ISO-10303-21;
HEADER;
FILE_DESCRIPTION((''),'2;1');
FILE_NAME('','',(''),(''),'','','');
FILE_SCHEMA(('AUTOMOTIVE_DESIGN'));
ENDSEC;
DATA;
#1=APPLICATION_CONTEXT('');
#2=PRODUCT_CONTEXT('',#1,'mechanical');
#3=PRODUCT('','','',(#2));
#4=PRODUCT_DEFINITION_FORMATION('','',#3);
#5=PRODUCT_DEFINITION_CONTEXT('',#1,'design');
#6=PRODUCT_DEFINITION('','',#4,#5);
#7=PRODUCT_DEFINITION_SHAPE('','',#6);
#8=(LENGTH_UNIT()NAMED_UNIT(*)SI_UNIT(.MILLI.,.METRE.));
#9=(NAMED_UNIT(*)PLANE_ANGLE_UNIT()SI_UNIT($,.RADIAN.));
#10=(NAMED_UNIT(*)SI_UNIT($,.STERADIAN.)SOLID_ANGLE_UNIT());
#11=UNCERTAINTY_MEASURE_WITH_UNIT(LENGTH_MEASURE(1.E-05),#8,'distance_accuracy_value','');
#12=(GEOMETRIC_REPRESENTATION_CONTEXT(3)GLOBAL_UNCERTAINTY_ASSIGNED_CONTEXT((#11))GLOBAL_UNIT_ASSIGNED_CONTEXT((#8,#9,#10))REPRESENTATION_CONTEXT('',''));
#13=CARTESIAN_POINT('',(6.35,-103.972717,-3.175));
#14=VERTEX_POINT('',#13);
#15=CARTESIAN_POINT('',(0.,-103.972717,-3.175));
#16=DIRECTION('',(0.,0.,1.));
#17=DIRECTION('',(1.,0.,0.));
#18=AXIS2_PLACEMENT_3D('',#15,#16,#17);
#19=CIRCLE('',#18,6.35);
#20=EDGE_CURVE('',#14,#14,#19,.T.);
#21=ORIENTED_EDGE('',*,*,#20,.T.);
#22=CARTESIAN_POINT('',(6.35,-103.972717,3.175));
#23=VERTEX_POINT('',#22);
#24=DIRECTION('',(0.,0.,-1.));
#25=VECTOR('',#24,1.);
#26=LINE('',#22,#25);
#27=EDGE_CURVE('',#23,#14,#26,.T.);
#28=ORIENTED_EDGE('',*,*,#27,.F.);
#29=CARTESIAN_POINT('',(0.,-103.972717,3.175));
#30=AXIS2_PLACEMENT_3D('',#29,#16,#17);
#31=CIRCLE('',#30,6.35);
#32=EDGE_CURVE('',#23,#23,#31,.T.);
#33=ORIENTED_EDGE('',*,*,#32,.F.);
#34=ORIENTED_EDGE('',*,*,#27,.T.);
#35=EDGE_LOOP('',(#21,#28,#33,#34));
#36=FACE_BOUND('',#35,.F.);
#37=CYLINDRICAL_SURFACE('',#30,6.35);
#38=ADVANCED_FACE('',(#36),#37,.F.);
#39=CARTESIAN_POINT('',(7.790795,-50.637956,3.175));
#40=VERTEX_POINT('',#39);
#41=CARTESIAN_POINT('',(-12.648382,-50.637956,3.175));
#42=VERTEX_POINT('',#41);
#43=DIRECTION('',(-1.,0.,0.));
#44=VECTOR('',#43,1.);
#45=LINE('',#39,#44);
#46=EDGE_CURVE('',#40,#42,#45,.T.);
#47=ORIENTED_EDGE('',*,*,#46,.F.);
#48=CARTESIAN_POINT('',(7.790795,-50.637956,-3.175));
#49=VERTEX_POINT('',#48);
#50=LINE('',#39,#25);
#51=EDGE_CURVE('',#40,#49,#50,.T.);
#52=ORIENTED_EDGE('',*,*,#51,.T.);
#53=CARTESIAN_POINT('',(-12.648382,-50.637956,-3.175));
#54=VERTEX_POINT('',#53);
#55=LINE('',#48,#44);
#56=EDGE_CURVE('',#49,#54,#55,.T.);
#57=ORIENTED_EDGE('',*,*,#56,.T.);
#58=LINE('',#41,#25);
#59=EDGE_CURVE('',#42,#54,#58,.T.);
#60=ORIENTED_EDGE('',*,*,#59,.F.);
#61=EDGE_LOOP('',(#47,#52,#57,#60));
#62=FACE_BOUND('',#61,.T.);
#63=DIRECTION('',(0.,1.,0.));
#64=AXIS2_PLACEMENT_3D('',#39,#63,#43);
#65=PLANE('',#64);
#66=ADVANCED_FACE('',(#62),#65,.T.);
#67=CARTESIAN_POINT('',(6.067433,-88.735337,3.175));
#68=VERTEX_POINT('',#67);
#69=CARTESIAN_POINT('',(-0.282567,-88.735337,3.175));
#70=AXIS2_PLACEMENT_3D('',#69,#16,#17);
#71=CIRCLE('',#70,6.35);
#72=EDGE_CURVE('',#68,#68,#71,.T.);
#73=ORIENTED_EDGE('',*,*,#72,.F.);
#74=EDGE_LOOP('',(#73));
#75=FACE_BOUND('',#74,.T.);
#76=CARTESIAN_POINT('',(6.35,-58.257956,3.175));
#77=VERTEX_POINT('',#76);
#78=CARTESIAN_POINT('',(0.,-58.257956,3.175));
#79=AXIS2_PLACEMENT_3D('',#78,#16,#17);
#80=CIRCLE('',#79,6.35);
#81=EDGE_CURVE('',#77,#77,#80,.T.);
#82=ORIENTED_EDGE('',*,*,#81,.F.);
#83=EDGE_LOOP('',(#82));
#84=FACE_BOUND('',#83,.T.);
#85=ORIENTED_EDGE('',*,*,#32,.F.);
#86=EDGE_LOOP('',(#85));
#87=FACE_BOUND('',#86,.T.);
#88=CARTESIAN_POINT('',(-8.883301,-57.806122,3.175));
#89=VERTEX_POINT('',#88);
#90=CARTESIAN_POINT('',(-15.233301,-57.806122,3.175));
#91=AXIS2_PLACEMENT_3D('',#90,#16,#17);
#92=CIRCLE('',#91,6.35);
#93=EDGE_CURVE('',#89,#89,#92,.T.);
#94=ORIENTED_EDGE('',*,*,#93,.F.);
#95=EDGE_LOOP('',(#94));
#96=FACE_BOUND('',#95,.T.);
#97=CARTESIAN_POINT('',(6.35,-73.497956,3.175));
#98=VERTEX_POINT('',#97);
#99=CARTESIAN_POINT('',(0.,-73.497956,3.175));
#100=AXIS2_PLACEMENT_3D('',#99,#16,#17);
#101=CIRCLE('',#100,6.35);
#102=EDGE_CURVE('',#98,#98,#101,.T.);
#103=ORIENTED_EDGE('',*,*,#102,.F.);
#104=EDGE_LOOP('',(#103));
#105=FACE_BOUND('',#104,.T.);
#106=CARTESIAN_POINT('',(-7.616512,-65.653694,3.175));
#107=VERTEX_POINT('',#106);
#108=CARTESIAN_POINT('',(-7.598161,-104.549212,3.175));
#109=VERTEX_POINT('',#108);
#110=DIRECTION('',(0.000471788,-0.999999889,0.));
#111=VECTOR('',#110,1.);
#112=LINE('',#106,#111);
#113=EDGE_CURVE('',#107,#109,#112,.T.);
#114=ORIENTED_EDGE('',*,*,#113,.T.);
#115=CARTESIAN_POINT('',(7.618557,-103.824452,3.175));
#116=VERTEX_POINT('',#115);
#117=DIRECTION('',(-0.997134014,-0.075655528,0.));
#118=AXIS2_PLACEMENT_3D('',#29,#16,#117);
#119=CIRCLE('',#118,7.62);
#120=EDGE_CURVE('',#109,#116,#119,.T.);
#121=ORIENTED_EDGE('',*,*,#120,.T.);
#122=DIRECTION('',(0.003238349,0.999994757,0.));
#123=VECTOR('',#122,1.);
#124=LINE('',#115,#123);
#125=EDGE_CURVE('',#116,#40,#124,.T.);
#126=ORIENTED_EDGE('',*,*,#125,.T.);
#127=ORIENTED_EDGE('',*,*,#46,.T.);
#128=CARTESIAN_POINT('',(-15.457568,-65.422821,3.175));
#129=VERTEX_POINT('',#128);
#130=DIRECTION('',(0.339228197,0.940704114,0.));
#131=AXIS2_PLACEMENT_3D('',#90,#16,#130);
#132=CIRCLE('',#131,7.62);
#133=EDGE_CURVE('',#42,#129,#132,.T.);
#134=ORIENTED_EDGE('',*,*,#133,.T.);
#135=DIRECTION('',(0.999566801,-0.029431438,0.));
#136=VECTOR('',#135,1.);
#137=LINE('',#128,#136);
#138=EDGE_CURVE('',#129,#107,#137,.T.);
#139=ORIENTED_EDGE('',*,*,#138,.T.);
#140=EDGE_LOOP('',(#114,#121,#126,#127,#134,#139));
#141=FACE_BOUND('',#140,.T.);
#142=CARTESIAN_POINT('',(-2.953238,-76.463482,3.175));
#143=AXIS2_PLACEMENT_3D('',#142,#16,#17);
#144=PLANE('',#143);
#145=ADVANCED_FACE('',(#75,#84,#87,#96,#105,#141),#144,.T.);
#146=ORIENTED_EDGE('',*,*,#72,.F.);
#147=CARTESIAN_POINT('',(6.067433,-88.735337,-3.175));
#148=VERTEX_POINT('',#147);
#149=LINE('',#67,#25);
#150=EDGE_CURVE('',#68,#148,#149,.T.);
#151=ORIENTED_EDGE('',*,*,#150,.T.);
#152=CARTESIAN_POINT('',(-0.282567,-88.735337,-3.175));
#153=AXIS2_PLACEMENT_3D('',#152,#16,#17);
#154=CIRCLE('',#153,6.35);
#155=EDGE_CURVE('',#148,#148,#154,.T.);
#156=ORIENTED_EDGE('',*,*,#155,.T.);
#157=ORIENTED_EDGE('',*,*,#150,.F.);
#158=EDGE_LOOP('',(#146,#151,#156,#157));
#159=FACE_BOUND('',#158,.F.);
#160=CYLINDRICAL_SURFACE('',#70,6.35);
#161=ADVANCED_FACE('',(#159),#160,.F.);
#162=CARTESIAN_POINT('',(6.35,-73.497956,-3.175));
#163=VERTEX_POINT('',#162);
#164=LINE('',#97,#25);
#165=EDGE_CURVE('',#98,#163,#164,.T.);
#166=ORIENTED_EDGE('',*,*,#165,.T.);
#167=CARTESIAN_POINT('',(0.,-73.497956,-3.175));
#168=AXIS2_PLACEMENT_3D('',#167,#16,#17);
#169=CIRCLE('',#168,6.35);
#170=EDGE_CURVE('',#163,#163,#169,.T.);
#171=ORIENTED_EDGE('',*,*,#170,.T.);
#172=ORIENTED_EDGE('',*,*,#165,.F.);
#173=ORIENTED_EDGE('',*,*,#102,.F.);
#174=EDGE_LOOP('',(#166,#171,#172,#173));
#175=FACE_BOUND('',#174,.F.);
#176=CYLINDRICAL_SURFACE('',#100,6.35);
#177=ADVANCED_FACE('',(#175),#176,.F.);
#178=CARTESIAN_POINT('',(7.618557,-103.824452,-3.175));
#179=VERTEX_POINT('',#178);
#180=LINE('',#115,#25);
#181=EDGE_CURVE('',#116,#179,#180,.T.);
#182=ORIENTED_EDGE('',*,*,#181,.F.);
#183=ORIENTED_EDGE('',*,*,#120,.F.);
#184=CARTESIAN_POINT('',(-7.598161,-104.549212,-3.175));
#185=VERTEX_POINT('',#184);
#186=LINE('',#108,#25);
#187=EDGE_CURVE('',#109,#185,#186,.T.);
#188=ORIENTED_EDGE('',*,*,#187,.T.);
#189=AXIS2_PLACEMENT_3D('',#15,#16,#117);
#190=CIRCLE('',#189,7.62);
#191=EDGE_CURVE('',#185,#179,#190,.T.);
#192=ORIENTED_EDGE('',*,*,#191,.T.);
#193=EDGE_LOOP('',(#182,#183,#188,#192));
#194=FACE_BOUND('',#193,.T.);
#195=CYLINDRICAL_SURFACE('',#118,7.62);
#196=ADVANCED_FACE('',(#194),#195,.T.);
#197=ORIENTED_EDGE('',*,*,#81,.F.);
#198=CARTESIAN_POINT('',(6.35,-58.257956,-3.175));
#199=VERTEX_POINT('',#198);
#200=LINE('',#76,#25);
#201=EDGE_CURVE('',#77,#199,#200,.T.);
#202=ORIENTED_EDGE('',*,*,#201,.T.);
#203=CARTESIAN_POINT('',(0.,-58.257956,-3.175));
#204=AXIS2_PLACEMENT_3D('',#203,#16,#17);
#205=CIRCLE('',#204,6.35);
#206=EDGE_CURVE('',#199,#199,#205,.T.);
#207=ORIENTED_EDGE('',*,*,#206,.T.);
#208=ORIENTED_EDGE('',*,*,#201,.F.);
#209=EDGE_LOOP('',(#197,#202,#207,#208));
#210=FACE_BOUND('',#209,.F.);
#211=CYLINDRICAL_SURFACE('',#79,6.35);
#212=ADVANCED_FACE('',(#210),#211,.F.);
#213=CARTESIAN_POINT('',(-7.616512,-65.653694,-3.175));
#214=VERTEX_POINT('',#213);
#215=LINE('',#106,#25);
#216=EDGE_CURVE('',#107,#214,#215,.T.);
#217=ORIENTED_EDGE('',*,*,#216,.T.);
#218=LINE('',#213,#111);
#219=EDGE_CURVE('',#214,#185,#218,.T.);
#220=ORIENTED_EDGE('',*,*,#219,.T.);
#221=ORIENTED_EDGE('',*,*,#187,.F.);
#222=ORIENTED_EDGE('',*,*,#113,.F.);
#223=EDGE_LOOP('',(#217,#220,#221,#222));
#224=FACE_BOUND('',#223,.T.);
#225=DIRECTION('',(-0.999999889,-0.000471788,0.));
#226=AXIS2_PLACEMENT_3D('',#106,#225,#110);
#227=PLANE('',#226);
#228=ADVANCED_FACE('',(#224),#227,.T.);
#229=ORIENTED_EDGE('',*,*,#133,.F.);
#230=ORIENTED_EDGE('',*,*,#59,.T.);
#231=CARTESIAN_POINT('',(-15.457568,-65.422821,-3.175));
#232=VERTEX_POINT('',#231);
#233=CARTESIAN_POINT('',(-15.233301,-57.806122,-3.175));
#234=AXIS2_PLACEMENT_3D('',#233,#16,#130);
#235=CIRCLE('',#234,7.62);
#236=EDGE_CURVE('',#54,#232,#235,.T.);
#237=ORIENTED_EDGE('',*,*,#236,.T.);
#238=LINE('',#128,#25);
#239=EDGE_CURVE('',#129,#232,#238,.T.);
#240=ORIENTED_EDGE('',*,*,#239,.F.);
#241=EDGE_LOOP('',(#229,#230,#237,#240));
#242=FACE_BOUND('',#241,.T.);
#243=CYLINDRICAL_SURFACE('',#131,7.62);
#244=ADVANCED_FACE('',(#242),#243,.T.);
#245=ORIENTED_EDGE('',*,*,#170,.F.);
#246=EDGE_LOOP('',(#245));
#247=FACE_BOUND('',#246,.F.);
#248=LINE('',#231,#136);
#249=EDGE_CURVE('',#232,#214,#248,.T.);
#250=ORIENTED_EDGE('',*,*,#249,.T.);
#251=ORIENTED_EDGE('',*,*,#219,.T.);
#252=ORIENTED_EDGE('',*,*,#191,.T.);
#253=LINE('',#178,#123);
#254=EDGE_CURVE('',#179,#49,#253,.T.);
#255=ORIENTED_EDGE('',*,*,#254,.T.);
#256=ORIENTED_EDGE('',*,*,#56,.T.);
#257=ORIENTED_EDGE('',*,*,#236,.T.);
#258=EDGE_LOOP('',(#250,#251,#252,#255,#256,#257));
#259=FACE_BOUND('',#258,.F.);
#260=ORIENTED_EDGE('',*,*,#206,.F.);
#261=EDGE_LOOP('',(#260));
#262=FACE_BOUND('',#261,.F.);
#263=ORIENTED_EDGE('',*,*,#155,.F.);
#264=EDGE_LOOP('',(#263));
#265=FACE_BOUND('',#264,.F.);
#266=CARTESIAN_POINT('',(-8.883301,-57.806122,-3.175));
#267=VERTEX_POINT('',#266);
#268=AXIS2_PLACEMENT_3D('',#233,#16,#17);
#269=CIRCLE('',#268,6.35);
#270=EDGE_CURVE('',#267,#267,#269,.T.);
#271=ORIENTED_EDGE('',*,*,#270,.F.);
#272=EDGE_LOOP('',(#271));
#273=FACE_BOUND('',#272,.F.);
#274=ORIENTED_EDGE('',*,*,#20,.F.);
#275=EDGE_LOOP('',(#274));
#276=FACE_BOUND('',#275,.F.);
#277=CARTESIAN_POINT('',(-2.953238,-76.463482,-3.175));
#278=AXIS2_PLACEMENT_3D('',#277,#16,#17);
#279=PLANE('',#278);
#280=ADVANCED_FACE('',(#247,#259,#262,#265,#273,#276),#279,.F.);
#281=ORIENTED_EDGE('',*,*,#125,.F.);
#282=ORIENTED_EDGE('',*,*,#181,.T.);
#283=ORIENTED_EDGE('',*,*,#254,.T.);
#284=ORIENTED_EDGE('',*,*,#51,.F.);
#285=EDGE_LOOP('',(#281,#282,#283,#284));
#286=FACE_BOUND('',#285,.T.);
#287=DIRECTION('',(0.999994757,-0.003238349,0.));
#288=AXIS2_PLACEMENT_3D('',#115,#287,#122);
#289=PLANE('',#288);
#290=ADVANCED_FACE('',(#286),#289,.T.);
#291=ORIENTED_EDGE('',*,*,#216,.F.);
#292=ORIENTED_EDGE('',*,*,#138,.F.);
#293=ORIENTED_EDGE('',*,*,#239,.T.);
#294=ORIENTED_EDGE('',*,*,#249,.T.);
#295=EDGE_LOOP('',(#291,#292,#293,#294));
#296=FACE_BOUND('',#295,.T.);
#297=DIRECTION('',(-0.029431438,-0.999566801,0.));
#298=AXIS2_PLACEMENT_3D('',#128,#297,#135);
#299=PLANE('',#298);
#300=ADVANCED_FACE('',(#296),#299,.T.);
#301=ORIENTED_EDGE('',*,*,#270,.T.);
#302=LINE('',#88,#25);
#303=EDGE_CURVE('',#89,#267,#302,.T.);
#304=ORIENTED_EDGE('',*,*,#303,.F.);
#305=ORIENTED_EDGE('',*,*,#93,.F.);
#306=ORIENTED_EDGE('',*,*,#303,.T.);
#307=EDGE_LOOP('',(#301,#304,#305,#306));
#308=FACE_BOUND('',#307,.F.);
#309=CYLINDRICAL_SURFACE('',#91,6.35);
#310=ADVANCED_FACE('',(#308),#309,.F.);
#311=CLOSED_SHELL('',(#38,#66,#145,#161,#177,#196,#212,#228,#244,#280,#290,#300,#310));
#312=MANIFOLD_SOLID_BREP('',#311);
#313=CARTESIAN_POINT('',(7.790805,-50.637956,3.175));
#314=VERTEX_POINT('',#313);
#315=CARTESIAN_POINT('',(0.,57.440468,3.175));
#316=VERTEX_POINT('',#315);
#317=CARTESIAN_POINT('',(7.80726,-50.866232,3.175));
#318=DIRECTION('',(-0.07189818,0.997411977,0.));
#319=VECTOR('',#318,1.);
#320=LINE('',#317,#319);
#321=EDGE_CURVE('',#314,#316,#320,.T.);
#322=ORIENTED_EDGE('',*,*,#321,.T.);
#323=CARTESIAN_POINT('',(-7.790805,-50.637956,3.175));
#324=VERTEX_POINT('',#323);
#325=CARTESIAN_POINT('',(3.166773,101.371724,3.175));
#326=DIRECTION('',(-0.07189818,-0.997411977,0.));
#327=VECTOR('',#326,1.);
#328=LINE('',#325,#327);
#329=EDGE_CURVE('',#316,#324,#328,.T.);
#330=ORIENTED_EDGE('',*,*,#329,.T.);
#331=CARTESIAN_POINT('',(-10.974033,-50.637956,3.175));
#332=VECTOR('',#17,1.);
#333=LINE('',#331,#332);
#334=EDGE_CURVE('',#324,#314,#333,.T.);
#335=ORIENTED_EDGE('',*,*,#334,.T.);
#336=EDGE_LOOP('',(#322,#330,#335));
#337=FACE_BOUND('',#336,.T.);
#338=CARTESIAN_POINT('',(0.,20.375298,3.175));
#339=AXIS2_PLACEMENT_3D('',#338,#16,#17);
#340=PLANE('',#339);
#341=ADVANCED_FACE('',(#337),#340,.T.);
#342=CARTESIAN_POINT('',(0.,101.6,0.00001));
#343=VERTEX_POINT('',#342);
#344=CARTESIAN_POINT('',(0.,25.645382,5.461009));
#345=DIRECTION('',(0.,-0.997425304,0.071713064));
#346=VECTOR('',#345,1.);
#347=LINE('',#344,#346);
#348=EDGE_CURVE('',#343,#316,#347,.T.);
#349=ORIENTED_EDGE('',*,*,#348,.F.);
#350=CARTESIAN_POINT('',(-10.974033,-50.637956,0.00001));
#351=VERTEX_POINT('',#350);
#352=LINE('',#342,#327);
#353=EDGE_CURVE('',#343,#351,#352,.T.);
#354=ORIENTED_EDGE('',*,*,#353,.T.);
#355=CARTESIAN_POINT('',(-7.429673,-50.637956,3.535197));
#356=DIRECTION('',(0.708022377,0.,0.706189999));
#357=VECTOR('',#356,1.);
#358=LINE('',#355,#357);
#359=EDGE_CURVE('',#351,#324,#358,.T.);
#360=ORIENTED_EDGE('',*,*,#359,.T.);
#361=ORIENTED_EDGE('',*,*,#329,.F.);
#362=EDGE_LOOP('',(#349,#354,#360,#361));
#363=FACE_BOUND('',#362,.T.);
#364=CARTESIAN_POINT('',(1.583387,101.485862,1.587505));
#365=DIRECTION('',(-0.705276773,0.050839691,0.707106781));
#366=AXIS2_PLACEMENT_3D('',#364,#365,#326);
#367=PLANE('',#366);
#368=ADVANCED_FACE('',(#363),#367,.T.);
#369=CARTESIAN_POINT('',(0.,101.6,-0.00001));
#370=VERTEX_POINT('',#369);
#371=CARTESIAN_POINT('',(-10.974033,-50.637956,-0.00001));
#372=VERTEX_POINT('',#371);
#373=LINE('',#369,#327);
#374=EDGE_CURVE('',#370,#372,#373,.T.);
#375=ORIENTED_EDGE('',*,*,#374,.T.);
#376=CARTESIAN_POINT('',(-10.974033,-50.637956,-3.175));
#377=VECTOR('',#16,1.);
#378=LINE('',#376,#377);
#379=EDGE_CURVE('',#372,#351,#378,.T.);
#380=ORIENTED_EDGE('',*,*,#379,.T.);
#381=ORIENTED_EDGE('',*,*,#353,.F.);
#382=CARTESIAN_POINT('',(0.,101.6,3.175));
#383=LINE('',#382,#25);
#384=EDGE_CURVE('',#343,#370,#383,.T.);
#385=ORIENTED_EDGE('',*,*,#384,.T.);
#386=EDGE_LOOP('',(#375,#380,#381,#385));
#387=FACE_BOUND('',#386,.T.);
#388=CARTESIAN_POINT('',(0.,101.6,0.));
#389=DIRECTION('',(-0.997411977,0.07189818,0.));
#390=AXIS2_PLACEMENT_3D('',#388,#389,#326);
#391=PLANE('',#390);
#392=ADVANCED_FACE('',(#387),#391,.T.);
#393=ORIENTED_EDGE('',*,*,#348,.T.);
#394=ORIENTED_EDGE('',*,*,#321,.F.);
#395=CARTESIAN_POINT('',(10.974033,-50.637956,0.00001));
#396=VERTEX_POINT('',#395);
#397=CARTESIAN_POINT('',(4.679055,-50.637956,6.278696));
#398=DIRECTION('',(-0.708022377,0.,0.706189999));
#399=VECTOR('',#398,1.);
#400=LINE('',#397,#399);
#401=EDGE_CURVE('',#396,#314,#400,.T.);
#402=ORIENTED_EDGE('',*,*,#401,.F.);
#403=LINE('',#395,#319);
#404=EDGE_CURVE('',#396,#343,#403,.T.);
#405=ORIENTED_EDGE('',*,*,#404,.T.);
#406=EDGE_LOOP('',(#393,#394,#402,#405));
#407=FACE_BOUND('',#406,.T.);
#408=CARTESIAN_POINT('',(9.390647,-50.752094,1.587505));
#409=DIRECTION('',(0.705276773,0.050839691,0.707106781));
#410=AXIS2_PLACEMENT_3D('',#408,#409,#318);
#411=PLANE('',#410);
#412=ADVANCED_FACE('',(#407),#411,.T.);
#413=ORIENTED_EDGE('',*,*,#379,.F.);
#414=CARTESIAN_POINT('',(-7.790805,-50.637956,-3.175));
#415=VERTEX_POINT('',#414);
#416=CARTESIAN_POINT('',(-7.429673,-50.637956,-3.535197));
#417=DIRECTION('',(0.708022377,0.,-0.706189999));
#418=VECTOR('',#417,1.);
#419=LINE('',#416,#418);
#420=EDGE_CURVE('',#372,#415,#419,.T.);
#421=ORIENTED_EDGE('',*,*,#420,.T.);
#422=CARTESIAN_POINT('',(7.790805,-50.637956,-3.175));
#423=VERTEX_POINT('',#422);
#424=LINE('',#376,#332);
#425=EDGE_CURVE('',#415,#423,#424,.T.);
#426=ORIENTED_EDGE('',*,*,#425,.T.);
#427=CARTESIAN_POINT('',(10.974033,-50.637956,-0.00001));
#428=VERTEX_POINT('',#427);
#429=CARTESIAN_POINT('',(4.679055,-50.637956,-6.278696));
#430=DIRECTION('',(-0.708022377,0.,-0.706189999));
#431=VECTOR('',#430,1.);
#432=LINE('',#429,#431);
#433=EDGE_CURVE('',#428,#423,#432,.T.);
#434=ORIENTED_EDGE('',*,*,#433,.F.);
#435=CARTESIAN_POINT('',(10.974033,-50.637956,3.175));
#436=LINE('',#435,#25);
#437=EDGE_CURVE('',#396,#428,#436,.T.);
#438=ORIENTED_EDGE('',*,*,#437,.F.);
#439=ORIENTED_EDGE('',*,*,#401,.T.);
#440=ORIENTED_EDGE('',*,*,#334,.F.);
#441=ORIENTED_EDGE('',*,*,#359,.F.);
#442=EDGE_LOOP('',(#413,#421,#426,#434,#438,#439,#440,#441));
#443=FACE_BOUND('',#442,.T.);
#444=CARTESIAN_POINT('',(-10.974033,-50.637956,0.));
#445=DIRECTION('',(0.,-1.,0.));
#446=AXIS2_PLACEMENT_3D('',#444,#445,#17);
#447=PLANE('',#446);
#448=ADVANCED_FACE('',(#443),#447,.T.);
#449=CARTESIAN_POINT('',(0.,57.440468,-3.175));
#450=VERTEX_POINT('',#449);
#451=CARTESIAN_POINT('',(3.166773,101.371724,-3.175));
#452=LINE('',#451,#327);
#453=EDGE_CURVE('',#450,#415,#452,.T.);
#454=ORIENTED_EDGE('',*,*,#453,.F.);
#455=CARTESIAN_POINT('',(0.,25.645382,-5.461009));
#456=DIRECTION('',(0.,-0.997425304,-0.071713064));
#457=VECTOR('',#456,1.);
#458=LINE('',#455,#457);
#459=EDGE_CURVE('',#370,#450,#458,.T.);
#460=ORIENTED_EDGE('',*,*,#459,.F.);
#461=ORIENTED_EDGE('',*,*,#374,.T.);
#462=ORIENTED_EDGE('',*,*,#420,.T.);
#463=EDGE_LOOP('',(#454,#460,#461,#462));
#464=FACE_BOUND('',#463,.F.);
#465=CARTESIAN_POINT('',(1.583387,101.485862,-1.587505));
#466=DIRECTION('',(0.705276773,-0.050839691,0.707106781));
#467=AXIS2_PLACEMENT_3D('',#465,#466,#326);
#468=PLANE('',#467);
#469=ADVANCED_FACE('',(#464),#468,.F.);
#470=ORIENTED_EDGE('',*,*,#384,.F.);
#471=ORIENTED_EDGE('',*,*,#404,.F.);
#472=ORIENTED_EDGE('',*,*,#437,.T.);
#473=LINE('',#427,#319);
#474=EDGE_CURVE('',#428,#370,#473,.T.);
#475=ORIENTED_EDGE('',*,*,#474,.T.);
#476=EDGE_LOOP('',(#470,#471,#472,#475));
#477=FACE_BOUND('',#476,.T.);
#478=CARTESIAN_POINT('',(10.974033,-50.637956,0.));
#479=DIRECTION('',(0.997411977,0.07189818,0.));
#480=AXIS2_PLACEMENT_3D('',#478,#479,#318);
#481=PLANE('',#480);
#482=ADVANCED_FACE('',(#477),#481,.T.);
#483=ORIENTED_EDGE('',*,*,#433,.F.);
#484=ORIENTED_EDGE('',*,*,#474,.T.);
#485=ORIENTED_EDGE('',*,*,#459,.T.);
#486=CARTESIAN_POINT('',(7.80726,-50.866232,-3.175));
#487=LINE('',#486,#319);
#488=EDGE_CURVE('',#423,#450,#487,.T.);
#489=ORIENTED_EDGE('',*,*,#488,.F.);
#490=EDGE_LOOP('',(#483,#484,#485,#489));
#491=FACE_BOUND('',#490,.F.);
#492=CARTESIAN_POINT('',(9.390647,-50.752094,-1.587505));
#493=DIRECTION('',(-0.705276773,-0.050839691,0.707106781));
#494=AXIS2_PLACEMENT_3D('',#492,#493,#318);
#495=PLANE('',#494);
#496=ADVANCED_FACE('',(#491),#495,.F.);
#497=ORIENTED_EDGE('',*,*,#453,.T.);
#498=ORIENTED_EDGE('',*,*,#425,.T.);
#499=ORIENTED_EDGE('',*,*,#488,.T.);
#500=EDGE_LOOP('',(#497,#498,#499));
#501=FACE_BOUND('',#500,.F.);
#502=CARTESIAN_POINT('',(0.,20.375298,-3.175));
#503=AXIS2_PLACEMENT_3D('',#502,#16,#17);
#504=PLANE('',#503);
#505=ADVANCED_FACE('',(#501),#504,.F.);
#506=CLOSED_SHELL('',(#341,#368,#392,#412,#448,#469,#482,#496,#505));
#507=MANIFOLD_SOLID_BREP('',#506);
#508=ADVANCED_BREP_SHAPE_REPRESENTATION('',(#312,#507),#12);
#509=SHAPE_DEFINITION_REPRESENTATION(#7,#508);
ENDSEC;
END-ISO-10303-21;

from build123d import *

# Parameters (mm, degrees)
F1_DEPTH = 3.175
F2_SIZE  = 3.17499
F3_R     = 6.35
F4_DEPTH = 6.35


# Not quite as in the source:
# - a fillet or chamfer is up to 0.001 mm smaller than in the source, because OpenCascade refuses the exact size
# - ends of sketch curves that miss each other by under 0.0002 mm in the source are joined
# - a feature names something its author has since deleted; it is built from what else it names


with BuildPart() as f1:
    # F0 (on Top) → F1 (new body, symmetric)
    with BuildSketch(Plane.XY):
        Polygon((0, 101.6), (-10.9740330666, -50.6379564073), (10.9740330666, -50.6379564073), align=None)
    extrude(amount=F1_DEPTH, both=True)

    # F2 (size 3.175 in the source; OpenCascade refuses exactly that, so slightly less here)
    f2_edges = [f1.edges().sort_by_distance(p)[0] for p in [
        (5.487017, 25.481022, 3.175),
        (-5.487017, 25.481022, 3.175),
        (5.487017, 25.481022, -3.175),
        (-5.487017, 25.481022, -3.175),
    ]]
    chamfer(f2_edges, length=F2_SIZE)


with BuildPart() as f4:
    # F3 (on face) → F4 (new body)
    with BuildSketch(Plane.XY.offset(3.175)):
        with BuildLine():
            Line((-7.6165116267, -65.6536943669), (-7.5981611835, -104.5492119633))
            ThreePointArc((-7.5981611835, -104.5492119633), (0.3625233188, -111.5840883864), (7.6185574498, -103.8244522658))
            Line((7.6185574498, -103.8244522658), (7.7907947724, -50.6379564073))
            Line((7.7907947724, -50.6379564073), (0, -50.6379564073))
            Line((0, -50.6379564073), (-7.7908047984, -50.6379564073))
            Line((-7.7908047984, -50.6379564073), (-12.6483816852, -50.6379564073))
            ThreePointArc((-12.6483816852, -50.6379564073), (-22.7193690915, -56.3837372477), (-15.4575681017, -65.4228207847))
            Line((-15.4575681017, -65.4228207847), (-7.6165116267, -65.6536943669))
        make_face()
        with Locations((-15.2333005435, -57.806121758)):
            Circle(F3_R, mode=Mode.SUBTRACT)
        with BuildLine():
            ThreePointArc((-7.6200625985, -58.1270703408), (-7.6182081929, -58.0795600348), (-7.6166502718, -58.0320390827))
            ThreePointArc((-7.6166502718, -58.0320390827), (-7.6191889591, -58.1467826471), (-7.619999152, -58.2615514324))
            Line((-7.619999152, -58.2615514324), (-7.6200625985, -58.1270703408))
        make_face(mode=Mode.SUBTRACT)
        with Locations((0, -103.9727168383)):
            Circle(F3_R, mode=Mode.SUBTRACT)
        with Locations((-0.2825671034, -88.7353366228)):
            Circle(F3_R, mode=Mode.SUBTRACT)
        with Locations((0, -73.4979564073)):
            Circle(F3_R, mode=Mode.SUBTRACT)
        with Locations((0, -58.2579564073)):
            Circle(F3_R, mode=Mode.SUBTRACT)
        with BuildLine():
            ThreePointArc((-7.619999152, -58.2615514324), (-7.6191889591, -58.1467826471), (-7.6166502718, -58.0320390827))
            ThreePointArc((-7.6166502718, -58.0320390827), (-7.6182081929, -58.0795600348), (-7.6200625985, -58.1270703408))
            Line((-7.6200625985, -58.1270703408), (-7.619999152, -58.2615514324))
        make_face()
    extrude(amount=-F4_DEPTH)


solid = Compound([f1.part, f4.part])
